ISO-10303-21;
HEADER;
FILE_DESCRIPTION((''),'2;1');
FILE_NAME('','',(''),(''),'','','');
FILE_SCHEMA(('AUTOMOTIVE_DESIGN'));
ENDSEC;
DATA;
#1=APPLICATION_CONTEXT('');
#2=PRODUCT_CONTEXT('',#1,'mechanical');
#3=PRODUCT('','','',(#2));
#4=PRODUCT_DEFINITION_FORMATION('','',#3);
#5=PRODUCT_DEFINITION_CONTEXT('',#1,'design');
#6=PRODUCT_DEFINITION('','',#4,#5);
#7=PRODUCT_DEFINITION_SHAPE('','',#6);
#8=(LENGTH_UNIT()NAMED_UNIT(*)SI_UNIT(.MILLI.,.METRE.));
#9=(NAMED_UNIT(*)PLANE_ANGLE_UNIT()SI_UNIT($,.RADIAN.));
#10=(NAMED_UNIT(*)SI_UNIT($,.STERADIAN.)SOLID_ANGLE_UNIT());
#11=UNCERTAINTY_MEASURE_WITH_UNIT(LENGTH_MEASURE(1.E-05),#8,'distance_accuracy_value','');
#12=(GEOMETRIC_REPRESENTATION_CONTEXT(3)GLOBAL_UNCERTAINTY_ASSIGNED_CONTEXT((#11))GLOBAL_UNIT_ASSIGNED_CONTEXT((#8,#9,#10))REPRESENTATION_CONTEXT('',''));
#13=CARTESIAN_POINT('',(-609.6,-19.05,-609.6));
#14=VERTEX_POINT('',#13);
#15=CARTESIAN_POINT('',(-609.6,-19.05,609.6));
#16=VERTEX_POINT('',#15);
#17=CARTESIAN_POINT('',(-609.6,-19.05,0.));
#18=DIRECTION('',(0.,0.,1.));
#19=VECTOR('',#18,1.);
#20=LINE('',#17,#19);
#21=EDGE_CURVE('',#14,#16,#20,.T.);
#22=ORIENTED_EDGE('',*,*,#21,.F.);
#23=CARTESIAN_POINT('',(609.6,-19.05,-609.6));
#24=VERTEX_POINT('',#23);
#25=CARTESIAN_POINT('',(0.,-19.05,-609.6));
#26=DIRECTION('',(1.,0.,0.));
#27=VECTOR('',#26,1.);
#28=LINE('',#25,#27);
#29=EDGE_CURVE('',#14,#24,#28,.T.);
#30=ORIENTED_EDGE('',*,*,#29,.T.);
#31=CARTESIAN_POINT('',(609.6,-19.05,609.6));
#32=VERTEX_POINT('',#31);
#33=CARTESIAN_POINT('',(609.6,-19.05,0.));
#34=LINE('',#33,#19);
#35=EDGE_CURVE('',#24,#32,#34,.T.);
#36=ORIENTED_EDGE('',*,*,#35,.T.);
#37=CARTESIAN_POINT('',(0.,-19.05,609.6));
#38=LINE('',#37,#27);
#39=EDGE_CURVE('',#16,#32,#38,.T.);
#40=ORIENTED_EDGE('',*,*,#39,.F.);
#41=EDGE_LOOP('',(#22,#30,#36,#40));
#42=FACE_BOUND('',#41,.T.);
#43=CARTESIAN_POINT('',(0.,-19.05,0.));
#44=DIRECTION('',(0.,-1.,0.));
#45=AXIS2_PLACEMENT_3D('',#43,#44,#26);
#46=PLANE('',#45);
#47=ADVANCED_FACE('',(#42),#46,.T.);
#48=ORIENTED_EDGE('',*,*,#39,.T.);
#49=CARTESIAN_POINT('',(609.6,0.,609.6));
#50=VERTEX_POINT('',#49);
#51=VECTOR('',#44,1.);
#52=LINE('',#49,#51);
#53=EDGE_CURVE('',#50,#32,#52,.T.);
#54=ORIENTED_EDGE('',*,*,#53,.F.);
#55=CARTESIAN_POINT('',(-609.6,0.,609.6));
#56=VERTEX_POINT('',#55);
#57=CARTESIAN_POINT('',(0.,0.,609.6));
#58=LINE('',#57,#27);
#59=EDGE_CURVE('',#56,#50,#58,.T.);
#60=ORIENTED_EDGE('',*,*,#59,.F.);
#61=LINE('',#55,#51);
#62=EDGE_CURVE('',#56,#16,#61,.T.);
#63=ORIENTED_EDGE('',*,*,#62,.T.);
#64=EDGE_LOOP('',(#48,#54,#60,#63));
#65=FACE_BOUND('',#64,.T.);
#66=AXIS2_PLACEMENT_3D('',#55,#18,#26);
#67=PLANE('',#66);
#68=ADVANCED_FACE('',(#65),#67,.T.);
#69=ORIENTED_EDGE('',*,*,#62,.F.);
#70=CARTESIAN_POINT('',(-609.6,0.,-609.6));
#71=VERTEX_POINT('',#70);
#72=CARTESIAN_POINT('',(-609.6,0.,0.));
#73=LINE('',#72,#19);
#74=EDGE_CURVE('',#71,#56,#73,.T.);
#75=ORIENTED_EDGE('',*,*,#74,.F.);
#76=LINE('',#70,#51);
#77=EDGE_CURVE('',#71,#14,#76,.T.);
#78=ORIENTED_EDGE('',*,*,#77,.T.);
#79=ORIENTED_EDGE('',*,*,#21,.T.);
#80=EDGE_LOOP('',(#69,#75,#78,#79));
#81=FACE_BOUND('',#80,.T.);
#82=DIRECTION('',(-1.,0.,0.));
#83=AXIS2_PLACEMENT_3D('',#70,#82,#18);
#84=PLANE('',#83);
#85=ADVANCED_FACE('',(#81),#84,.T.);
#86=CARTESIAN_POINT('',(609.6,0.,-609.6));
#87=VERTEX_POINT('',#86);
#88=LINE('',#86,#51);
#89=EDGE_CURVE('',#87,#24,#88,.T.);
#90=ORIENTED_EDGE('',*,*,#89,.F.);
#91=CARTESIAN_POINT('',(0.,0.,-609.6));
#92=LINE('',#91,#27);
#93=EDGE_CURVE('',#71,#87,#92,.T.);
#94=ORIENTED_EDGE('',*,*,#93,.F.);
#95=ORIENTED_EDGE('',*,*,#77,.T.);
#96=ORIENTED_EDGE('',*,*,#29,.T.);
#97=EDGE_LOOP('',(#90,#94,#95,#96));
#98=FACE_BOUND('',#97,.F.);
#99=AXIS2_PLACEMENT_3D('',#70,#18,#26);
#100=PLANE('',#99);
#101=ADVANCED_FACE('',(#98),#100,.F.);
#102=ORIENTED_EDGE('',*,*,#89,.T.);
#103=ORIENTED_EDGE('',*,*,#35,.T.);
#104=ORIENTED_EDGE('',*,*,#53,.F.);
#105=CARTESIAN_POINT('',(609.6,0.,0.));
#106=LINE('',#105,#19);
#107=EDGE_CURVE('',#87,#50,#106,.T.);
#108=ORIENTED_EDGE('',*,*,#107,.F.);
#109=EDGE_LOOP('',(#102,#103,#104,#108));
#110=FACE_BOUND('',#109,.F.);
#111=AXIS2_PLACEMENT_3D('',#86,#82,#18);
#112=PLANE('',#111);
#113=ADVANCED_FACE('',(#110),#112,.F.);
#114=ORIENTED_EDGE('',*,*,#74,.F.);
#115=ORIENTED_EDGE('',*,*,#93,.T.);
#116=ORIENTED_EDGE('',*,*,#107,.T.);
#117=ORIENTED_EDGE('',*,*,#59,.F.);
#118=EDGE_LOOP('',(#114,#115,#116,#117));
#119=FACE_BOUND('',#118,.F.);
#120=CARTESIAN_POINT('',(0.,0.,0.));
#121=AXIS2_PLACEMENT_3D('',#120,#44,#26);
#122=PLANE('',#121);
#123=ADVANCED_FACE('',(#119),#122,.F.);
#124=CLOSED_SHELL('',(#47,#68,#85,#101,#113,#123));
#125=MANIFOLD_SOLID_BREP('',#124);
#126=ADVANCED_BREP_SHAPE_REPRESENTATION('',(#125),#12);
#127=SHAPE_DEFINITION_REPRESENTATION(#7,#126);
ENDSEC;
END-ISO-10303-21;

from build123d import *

# Parameters (mm, degrees)
F0_W     = 1219.2
F0_H     = 1219.2
F1_DEPTH = 19.05


# Not quite as in the source:
# - a feature names something its author has since deleted; it is built from what else it names


with BuildPart() as f1:
    # F0 (on Front) → F1 (new body)
    with BuildSketch(Plane.XZ):
        Rectangle(F0_W, F0_H)
    extrude(amount=F1_DEPTH)


solid = f1.part
